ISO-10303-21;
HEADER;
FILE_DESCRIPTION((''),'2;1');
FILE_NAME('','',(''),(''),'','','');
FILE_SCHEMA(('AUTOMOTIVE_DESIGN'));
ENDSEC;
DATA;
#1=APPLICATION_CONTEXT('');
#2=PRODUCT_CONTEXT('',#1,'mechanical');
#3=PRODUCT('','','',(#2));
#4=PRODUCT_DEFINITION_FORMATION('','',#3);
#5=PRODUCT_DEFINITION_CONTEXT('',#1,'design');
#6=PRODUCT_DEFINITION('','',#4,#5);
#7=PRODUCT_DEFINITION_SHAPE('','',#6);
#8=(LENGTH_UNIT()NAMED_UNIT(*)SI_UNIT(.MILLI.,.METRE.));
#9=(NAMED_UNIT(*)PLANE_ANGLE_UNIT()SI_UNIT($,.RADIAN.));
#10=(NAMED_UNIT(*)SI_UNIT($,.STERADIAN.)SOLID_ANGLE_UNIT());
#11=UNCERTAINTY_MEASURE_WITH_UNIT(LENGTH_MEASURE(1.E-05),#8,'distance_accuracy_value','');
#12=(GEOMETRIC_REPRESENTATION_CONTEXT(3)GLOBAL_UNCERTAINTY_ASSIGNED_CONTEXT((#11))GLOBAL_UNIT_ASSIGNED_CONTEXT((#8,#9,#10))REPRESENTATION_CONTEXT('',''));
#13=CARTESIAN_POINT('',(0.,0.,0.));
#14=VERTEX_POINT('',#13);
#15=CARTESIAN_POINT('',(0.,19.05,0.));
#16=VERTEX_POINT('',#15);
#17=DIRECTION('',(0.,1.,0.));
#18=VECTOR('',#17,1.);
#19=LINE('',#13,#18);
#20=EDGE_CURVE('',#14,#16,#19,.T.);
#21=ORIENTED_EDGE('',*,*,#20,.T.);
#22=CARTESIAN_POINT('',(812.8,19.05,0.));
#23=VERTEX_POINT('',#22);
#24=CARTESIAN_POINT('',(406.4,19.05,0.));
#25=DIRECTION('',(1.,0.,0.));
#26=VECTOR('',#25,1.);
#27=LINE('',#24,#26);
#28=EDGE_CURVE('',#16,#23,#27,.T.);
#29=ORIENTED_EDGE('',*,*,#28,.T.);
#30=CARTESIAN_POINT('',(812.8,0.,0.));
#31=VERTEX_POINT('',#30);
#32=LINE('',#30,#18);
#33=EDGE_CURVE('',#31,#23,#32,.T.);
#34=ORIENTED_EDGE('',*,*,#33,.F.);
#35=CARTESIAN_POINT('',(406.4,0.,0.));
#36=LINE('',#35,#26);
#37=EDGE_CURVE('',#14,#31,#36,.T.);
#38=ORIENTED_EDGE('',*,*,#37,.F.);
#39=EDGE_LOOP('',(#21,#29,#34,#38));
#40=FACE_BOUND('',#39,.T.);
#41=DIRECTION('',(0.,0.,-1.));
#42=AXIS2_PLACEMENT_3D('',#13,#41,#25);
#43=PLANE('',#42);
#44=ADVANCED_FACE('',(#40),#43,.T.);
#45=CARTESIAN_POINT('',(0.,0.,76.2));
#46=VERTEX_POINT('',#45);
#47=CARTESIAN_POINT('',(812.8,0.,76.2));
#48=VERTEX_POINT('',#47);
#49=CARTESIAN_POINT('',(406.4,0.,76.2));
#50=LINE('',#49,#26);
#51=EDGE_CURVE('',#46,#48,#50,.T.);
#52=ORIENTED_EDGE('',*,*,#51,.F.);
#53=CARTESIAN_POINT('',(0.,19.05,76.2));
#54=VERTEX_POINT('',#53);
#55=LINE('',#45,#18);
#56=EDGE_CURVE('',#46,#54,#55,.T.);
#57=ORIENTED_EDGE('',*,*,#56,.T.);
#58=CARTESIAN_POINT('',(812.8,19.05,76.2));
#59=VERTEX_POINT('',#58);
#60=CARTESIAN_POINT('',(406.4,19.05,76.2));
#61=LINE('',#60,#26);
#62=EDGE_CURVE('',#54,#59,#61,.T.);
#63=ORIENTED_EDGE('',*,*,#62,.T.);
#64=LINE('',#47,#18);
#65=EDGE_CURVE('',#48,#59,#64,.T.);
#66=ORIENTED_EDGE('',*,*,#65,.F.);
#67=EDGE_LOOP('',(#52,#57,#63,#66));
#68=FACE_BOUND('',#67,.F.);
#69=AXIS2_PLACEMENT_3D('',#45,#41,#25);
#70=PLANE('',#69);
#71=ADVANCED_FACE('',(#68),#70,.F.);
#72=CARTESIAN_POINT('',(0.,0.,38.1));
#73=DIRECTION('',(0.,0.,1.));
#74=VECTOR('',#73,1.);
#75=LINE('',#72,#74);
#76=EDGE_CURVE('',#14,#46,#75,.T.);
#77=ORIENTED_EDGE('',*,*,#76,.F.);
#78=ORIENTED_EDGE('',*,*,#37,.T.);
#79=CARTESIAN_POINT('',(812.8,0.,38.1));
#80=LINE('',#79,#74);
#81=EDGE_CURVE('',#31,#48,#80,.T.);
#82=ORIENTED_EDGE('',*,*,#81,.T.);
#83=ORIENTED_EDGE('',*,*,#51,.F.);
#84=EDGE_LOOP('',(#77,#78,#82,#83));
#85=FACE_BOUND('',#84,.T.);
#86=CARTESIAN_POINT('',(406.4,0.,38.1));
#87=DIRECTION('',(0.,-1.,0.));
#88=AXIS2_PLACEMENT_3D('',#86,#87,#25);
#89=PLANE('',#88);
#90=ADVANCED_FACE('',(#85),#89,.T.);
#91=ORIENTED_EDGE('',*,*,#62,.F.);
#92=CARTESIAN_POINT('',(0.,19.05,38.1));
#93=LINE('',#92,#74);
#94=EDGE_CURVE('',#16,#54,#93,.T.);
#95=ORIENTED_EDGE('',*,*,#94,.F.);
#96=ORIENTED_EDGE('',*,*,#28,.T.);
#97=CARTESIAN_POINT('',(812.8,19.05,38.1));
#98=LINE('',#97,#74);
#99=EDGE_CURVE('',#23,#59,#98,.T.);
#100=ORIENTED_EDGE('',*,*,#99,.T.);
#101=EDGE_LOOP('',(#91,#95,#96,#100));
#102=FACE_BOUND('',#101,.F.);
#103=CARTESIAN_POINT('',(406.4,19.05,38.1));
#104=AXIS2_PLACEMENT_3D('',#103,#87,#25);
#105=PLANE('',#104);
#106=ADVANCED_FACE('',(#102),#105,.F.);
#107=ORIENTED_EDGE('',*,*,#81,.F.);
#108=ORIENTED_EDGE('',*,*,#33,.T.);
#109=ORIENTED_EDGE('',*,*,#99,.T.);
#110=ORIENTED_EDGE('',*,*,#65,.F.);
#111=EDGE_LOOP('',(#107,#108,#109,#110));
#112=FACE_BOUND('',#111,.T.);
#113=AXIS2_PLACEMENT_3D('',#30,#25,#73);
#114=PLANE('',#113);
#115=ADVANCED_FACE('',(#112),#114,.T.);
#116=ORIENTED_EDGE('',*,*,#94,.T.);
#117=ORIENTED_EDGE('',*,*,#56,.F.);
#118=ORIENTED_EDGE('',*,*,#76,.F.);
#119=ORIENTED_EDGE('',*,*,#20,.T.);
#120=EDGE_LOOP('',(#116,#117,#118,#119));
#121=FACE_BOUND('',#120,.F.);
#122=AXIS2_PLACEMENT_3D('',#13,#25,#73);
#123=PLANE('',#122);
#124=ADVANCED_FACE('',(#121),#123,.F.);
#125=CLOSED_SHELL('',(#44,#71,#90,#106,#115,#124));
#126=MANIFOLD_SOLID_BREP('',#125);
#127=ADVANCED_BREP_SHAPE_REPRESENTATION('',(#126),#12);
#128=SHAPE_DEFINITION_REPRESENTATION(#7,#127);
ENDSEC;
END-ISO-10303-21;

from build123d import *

# Parameters (mm, degrees)
F0_W     = 812.8
F0_H     = 76.2
F1_DEPTH = 19.05


# Not quite as in the source:
# - a feature names something its author has since deleted; it is built from what else it names


with BuildPart() as f1:
    # F0 (on Front) → F1 (new body)
    with BuildSketch(Plane.XZ):
        with Locations((406.4, 38.1)):
            Rectangle(F0_W, F0_H)
    extrude(amount=-F1_DEPTH)


solid = f1.part
